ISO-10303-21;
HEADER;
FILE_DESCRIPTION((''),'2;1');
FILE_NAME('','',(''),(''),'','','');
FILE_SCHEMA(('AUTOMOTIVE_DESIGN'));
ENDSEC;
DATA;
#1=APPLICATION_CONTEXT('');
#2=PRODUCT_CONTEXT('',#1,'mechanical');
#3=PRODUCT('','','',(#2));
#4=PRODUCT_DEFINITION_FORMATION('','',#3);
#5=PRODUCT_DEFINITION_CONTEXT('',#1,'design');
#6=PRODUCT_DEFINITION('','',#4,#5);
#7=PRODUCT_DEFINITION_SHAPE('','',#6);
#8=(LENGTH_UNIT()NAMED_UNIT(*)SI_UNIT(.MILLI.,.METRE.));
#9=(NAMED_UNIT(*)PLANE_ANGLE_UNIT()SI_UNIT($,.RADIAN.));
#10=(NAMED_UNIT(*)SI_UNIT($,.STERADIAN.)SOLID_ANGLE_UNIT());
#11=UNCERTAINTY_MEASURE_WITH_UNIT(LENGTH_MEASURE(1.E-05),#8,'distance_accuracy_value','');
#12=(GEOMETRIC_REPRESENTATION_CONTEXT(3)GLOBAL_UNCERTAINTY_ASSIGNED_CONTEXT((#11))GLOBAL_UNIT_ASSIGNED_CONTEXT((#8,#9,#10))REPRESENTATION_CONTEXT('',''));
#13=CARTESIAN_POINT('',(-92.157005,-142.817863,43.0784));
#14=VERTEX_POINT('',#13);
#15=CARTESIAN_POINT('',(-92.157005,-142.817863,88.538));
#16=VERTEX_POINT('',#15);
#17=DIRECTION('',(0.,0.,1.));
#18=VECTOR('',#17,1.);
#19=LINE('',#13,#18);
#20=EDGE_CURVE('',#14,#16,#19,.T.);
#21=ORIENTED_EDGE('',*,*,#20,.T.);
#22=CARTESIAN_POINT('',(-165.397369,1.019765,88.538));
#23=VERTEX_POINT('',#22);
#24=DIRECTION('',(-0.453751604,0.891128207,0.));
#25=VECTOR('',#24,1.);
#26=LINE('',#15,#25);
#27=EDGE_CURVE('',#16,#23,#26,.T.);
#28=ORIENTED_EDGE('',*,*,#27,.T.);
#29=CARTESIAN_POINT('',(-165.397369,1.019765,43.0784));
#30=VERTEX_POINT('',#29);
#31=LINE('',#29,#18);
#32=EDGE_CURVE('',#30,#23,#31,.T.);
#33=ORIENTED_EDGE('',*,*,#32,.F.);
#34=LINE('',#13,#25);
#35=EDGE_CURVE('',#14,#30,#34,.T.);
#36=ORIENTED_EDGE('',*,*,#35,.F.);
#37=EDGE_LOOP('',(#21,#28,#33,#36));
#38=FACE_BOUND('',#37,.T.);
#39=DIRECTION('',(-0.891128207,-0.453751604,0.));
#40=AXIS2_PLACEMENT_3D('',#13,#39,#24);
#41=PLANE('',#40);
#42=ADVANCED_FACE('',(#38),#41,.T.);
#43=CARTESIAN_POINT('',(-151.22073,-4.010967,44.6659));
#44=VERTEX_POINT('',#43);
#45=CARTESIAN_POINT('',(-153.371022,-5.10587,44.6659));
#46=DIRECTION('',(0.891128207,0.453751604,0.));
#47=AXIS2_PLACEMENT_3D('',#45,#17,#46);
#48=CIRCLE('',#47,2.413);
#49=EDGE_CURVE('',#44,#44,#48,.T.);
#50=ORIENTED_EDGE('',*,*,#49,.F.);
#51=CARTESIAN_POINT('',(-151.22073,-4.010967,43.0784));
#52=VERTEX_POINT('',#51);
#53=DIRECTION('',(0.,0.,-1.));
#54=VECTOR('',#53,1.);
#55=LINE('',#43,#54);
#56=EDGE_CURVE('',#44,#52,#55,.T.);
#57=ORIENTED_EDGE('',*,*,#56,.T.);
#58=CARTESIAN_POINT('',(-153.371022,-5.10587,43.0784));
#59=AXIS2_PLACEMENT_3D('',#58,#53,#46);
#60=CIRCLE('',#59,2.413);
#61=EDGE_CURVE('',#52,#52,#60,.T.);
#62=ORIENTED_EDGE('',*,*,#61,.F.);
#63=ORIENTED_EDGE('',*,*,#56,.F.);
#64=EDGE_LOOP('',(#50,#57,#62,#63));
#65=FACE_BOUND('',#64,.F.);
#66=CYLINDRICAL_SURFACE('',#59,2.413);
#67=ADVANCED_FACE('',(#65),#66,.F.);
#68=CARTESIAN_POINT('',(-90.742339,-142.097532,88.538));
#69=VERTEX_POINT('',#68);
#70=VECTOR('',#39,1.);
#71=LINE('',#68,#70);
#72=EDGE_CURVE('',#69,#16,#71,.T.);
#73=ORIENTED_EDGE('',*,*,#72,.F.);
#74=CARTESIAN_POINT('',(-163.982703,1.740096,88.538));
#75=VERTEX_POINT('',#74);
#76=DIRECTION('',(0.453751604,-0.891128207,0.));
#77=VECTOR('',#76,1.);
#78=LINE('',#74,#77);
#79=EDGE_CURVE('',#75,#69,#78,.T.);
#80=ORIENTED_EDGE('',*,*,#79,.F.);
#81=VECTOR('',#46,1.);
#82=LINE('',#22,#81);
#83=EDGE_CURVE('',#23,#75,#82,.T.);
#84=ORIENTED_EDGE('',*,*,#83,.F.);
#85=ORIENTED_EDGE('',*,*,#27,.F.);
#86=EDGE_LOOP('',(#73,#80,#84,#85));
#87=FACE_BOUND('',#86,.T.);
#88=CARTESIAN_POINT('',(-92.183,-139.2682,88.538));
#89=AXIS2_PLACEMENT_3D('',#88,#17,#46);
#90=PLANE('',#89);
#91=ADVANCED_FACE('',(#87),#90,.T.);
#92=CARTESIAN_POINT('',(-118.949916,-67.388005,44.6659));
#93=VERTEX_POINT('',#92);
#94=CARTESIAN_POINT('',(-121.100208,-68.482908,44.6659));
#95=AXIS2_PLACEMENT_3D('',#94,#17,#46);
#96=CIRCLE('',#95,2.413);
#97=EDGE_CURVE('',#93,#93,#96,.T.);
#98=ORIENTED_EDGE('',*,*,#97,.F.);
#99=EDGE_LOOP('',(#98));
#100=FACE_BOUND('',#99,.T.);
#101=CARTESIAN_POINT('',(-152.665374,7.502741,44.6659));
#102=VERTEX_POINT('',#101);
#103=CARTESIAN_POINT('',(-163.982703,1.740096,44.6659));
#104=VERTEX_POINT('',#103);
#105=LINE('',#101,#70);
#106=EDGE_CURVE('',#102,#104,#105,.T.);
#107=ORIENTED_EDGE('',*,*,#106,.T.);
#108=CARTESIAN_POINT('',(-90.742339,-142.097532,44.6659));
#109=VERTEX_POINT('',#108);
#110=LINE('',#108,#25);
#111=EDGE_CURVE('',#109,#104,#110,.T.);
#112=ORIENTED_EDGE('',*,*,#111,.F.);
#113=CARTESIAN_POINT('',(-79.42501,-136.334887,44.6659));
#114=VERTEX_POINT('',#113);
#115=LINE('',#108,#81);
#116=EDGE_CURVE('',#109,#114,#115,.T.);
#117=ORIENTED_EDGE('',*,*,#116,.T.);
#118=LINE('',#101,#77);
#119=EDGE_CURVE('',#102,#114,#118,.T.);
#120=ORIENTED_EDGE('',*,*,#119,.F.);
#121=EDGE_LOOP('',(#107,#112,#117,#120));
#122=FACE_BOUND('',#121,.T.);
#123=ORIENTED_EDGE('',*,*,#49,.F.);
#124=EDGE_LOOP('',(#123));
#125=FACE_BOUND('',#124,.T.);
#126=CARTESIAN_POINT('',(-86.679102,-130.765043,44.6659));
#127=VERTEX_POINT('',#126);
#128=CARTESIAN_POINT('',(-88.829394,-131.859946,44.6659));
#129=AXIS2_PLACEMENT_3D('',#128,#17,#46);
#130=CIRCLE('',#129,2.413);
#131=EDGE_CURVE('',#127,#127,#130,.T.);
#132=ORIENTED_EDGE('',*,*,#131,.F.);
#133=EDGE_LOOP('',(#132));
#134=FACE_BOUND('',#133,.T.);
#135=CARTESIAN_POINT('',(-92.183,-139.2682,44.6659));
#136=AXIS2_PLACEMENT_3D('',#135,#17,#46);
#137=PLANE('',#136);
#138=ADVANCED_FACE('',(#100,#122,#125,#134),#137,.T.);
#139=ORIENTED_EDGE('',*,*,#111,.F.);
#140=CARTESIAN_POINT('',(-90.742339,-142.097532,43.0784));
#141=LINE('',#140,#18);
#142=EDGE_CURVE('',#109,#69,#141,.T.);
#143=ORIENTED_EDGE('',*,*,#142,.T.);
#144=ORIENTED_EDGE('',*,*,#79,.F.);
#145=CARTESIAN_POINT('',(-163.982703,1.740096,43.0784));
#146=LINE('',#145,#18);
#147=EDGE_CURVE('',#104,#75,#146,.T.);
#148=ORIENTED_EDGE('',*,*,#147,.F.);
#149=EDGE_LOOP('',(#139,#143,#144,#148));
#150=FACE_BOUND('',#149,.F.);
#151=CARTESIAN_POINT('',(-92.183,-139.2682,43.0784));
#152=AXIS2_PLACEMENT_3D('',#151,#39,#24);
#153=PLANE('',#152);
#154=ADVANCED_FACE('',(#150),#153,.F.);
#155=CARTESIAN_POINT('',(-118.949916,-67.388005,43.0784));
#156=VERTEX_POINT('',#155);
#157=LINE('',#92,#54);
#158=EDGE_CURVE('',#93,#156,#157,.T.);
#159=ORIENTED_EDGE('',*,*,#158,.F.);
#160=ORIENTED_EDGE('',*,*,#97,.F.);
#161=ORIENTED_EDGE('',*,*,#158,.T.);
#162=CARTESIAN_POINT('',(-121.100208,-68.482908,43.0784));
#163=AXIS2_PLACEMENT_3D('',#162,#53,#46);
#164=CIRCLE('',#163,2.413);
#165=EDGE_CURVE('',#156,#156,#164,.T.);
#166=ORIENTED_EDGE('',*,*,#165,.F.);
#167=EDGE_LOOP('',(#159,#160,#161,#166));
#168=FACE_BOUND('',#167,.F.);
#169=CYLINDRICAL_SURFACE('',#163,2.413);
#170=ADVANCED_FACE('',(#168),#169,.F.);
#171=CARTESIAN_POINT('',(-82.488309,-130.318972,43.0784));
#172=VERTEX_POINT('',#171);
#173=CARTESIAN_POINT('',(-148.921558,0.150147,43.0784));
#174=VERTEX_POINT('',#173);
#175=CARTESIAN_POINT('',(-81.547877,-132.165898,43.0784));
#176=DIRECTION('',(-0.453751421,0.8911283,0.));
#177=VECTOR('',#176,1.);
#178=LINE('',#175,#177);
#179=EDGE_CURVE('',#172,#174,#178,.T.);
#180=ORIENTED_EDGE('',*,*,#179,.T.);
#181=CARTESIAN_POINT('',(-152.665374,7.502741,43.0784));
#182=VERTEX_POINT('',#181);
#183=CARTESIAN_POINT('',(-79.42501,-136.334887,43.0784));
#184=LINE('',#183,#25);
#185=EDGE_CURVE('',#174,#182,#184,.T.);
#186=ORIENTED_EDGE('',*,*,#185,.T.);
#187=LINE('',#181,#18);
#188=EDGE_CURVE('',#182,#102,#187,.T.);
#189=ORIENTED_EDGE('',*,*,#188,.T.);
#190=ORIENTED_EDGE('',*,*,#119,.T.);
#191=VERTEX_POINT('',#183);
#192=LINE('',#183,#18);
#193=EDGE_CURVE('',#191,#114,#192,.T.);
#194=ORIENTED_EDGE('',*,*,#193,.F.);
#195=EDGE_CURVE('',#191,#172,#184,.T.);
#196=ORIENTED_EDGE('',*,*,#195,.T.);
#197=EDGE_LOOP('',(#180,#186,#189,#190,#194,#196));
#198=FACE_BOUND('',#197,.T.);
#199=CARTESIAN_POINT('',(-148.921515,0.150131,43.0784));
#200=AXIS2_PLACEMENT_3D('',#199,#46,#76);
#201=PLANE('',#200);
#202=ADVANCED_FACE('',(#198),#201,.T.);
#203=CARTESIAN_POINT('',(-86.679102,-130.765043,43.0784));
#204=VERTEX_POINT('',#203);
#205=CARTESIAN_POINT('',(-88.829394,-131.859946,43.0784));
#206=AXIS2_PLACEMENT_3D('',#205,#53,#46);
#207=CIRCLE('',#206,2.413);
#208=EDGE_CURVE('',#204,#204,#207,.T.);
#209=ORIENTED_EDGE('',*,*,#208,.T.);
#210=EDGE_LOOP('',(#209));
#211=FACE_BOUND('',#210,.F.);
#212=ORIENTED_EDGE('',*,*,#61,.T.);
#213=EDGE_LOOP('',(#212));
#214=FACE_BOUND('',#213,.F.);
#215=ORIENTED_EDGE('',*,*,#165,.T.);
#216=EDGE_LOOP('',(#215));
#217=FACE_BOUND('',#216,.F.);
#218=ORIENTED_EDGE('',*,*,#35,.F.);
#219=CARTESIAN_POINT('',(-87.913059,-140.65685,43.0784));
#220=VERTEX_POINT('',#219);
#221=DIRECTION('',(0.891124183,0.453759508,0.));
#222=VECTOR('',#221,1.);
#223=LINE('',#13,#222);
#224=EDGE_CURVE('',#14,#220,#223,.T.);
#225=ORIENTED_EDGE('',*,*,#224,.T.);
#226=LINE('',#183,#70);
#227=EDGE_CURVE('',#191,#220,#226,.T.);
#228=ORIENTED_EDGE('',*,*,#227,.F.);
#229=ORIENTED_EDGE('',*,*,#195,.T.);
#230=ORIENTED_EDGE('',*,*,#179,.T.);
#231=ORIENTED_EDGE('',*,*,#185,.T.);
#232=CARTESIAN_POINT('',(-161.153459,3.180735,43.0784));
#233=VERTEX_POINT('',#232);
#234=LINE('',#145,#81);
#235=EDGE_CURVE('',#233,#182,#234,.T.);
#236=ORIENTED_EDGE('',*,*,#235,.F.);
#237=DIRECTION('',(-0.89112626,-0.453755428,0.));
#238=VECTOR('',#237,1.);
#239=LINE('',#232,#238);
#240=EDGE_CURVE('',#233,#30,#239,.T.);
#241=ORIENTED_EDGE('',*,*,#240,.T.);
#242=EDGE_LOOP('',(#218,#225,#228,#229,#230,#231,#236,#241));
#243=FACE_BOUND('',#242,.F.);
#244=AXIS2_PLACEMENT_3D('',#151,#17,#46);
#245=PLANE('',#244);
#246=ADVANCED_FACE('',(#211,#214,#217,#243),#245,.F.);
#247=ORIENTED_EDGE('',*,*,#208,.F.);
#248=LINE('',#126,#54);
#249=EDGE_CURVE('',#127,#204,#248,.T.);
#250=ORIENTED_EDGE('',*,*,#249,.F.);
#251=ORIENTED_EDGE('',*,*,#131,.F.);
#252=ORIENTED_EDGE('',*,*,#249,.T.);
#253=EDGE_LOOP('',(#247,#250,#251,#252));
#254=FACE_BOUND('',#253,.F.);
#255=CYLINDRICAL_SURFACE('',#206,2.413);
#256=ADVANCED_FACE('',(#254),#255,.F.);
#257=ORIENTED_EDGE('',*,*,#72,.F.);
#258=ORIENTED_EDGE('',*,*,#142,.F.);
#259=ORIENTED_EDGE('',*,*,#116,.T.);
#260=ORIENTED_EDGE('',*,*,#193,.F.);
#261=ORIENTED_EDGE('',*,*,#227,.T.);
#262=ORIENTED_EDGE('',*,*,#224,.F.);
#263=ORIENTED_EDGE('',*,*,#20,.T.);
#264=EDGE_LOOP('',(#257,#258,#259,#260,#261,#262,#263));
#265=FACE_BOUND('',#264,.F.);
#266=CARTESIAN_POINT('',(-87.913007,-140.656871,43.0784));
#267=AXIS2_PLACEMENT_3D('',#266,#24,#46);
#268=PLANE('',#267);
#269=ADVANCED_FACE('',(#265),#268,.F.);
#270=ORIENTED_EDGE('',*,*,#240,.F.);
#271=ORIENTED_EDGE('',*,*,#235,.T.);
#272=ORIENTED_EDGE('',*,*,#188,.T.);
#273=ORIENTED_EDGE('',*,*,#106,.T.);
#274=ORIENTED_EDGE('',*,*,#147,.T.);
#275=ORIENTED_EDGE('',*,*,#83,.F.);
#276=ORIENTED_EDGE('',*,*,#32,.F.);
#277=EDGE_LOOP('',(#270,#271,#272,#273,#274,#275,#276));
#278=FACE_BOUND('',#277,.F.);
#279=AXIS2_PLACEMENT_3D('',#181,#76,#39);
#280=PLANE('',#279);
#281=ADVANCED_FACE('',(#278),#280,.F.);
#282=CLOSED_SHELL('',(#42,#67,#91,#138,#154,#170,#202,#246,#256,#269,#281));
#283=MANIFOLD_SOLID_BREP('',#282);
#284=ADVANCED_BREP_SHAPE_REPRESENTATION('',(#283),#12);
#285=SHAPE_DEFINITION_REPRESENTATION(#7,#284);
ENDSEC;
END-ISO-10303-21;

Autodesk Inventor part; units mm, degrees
ref_plane "Work Plane1" through (-105.5469, -33.8995, 0) normal (0, 0, 1) x (1, 0, 0)
sketch "Sketch1" plane through (-105.5469, -33.8995, 0) normal (0, 0, 1) x (1, 0, 0)
  circle A0 centre (51.4164, 20.6909) radius 2.413 projected
  circle A1 centre (61.5426, -29.0897) radius 2.413 projected
  circle A2 centre (41.2902, 70.4714) radius 2.413 projected
  circle A3 centre (71.6688, -78.8702) radius 2.413 projected
  circle A4 centre (27.8827, -36.0288) radius 3.175 projected
  line L0 (21.5564, -145.7309) -> (-91.4082, 76.2381) projected
  line L1 (59.5069, 74.2446) -> (98.755, -118.7966) projected
  line L2 (15.2228, 144.056) -> (44.9436, 105.9012) projected
  line L3 (63.6348, -131.723) -> (58.903, -119.9375) projected
  line L4 (53.0129, -122.3028) -> (57.7447, -134.0883) projected
  arc A5 (3.7348, 135.3868) -> (-79.7406, 82.2913) centre (-35.4587, 104.8391) ccw
  line L5 (3.7348, 135.3868) -> (33.4679, 97.2384)
  arc A6 (45.3974, 71.3204) -> (33.4679, 97.2384) centre (-15.7425, 58.8835) ccw
  line L6 (45.3974, 71.3204) -> (84.6647, -121.7179)
  arc A7 (33.2723, -139.6562) -> (84.6647, -121.7179) centre (57.7489, -127.193) ccw
  arc A8 (2.9524, 134.777) -> (-78.8566, 82.7414) centre (-35.4587, 104.8391) ccw
  line L7 (2.9524, 134.777) -> (32.6855, 96.6286)
  arc A9 (44.4253, 71.1227) -> (32.6855, 96.6286) centre (-15.7425, 58.8835) ccw
  line L8 (44.4253, 71.1227) -> (83.6926, -121.9156)
  arc A10 (34.1563, -139.2061) -> (83.6926, -121.9156) centre (57.7489, -127.193) ccw
  line L9 (34.1563, -139.2061) -> (-78.8566, 82.7414)
  arc A11 (-4.5602, 128.9216) -> (-70.3686, 87.0634) centre (-35.4587, 104.8391) ccw
  line L10 (-4.5602, 128.9216) -> (25.1729, 90.7732)
  arc A12 (35.0915, 69.224) -> (25.1729, 90.7732) centre (-15.7425, 58.8835) ccw
  line L11 (35.0915, 69.224) -> (74.3588, -123.8143)
  arc A13 (42.6443, -134.8841) -> (74.3588, -123.8143) centre (57.7489, -127.193) ccw
  line L12 (42.6443, -134.8841) -> (-70.3686, 87.0634)
  arc A14 (5.4566, 136.7288) -> (-81.686, 81.3007) centre (-35.4587, 104.8391) ccw
  line L13 (5.4566, 136.7288) -> (35.1897, 98.5804)
  arc A15 (47.5366, 71.7556) -> (35.1897, 98.5804) centre (-15.7425, 58.8835) ccw
  line L14 (47.5366, 71.7556) -> (86.8039, -121.2827)
  arc A16 (31.327, -140.6467) -> (86.8039, -121.2827) centre (57.7489, -127.193) ccw
  line L15 (31.327, -140.6467) -> (-81.686, 81.3007)
  circle A17 centre (57.7489, -127.193) radius 44.45
  circle A18 centre (-35.4587, 104.8391) radius 69.85
  circle A19 centre (-47.8242, 28.7936) radius 2.413 projected
  circle A20 centre (-15.5534, -34.5834) radius 2.413 projected
  circle A21 centre (16.7174, -97.9605) radius 2.413 projected
  line L16 (-33.1344, 24.0942) -> (34.7456, 18.5458) projected
  line L17 (36.5081, 12.9323) -> (-6.2049, -22.3208) projected
  line L18 (-20.7511, -20.2117) -> (-39.1333, 15.9083) projected
  line L19 (38.3036, 25.8999) -> (-20.4951, 30.706) projected
  line L20 (-21.5821, 36.7465) -> (30.7819, 61.2351) projected
  line L21 (44.0707, 55.5202) -> (48.097, 35.7165) projected
  line L22 (-53.0081, 43.1715) -> (-61.3301, 59.5239) projected
  line L23 (17.8998, 109.9146) -> (30.1007, 94.2514) projected
  line L24 (27.5547, 68.1378) -> (-5.8444, 52.5185) projected
  line L25 (27.1825, -114.3985) -> (25.3807, -110.8581) projected
  line L26 (32.1964, -96.6363) -> (38.137, -94.5724) projected
  line L27 (74.4344, -93.8236) -> (75.2107, -97.6416) projected
  line L28 (50.495, -96.7953) -> (49.4394, -94.1661) projected
  line L29 (51.3425, -89.9843) -> (60.23, -86.8964) projected
  line L30 (-10.1341, 54.212) -> (-12.6231, 60.4113) projected
  line L31 (-19.6913, 57.573) -> (-16.9128, 50.6526) projected
  line L32 (-18.5132, 46.5938) -> (-35.734, 38.5403) projected
  line L33 (42.124, -96.3889) -> (43.4268, -99.6336) projected
  arc A22 (40.3328, 7.2327) -> (41.7343, 8.6241) centre (33.4597, 15.5569) ccw projected
  arc A23 (45.6191, 9.409) -> (41.7343, 8.6241) centre (44.1679, 6.585) ccw projected
  arc A24 (45.6191, 9.409) -> (50.3997, 8.0475) centre (51.4164, 20.6909) ccw projected
  arc A25 (53.2564, 5.5162) -> (50.3997, 8.0475) centre (50.1452, 4.8827) ccw projected
  line L34 (53.2564, 5.5162) -> (57.2026, -13.8642) projected
  arc A26 (55.534, -17.3261) -> (57.2026, -13.8642) centre (54.0915, -14.4977) ccw projected
  arc A27 (55.534, -17.3261) -> (49.5198, -23.895) centre (61.311, -28.6529) ccw projected
  arc A28 (46.8024, -25.8738) -> (49.5198, -23.895) centre (46.5755, -22.7069) ccw projected
  line L35 (46.8024, -25.8738) -> (37.6772, -26.5277) projected
  arc A29 (35.5367, -25.8944) -> (37.6772, -26.5277) centre (37.4502, -23.3608) ccw projected
  arc A30 (35.5367, -25.8944) -> (18.8618, -27.0893) centre (27.8827, -36.0288) ccw projected
  arc A31 (16.8336, -28.0213) -> (18.8618, -27.0893) centre (16.6066, -24.8545) ccw projected
  line L36 (16.8336, -28.0213) -> (0.7655, -29.1728) projected
  arc A32 (-0.3587, -26.3652) -> (0.7655, -29.1728) centre (0.652, -27.5893) ccw projected
  line L37 (-0.3587, -26.3652) -> (40.3328, 7.2327) projected
  arc A33 (12.0706, -61.7398) -> (8.1483, -51.9706) centre (20.8352, -52.5488) ccw projected
  line L38 (25.9855, -70.6908) -> (17.4507, -83.8024) projected
  line L39 (11.5059, -83.5949) -> (-6.8763, -47.4749) projected
  line L40 (-0.2859, -37.1185) -> (-0.1921, -37.1119) projected
  line L41 (74.8789, -123.628) -> (78.6564, -122.8604) projected
  line L42 (0.38, 132.4063) -> (2.0588, 130.251) projected
  line L43 (38.7029, -137.0353) -> (37.8849, -135.428) projected
  line L44 (38.579, -133.2932) -> (44.3373, -130.3617) projected
  line L45 (12.0706, -61.7398) -> (13.7631, -65.9552) projected
  line L46 (17.8911, -67.7189) -> (22.1428, -66.0115) projected
  line L47 (2.9792, -39.0961) -> (8.1483, -51.9706) projected
  ellipse E0 centre (-34.8429, 105.035) end of major axis (-54.1736, 165.5211) minor radius 63.4728 (15.2228, 144.056) -> (-91.4082, 76.2381) ccw projected
  ellipse E1 centre (58.3238, -127.0129) end of major axis (45.7589, -87.6969) minor radius 41.2573 (21.5564, -145.7309) -> (98.755, -118.7966) ccw projected
  ellipse E2 centre (-15.1352, 59.076) end of major axis (-38.3321, 131.6593) minor radius 76.1674 (59.5069, 74.2446) -> (44.9436, 105.9012) ccw projected
  ellipse E3 centre (-34.8429, 105.035) end of major axis (-38.9507, 117.8883) minor radius 13.488 projected
  ellipse E4 centre (60.6898, -132.9057) end of major axis (59.7232, -129.8814) minor radius 3.1736 (57.7447, -134.0883) -> (63.6348, -131.723) ccw projected
  ellipse E5 centre (55.9579, -121.1202) end of major axis (54.9914, -118.0958) minor radius 3.1736 (58.903, -119.9375) -> (53.0129, -122.3028) ccw projected
  ellipse E6 centre (-47.0283, 29.0524) end of major axis (-50.8944, 41.1496) minor radius 12.6946 (-38.4497, 19.689) -> (-36.1193, 22.5544) ccw projected
  ellipse E7 centre (-33.3921, 20.9299) end of major axis (-34.3586, 23.9542) minor radius 3.1736 (-33.1344, 24.0942) -> (-36.1193, 22.5544) ccw projected
  ellipse E8 centre (34.4879, 15.3814) end of major axis (33.5214, 18.4057) minor radius 3.1736 (36.5081, 12.9323) -> (34.7456, 18.5458) ccw projected
  ellipse E9 centre (-8.2251, -19.8717) end of major axis (-7.2586, -22.896) minor radius 3.1736 (-9.5343, -22.7635) -> (-6.2049, -22.3208) ccw projected
  ellipse E10 centre (-14.7713, -34.3308) end of major axis (-18.6374, -22.2336) minor radius 12.6946 (-9.5343, -22.7635) -> (-17.2925, -21.8836) ccw projected
  ellipse E11 centre (-17.9228, -18.7718) end of major axis (-16.9563, -21.7962) minor radius 3.1736 (-20.7511, -20.2117) -> (-17.2925, -21.8836) ccw projected
  ellipse E12 centre (-36.305, 17.3481) end of major axis (-35.3385, 14.3238) minor radius 3.1736 (-38.4497, 19.689) -> (-39.1333, 15.9083) ccw projected
  ellipse E13 centre (38.5613, 29.0642) end of major axis (39.5278, 26.0399) minor radius 3.1736 (38.3036, 25.8999) -> (41.2885, 27.4397) ccw projected
  ellipse E14 centre (-20.2374, 33.8704) end of major axis (-19.2708, 30.8461) minor radius 3.1736 (-21.5821, 36.7465) -> (-20.4951, 30.706) ccw projected
  ellipse E15 centre (32.1266, 58.3589) end of major axis (31.1601, 61.3832) minor radius 3.1736 (34.1165, 60.8317) -> (30.7819, 61.2351) ccw projected
  ellipse E16 centre (42.0762, 70.723) end of major axis (38.2101, 82.8202) minor radius 12.6946 (34.1165, 60.8317) -> (41.1837, 58.0551) ccw projected
  ellipse E17 centre (40.9606, 54.8882) end of major axis (39.994, 57.9125) minor radius 3.1736 (44.0707, 55.5202) -> (41.1837, 58.0551) ccw projected
  ellipse E18 centre (44.9869, 35.0845) end of major axis (44.0204, 38.1088) minor radius 3.1736 (46.4291, 32.2559) -> (48.097, 35.7165) ccw projected
  ellipse E19 centre (-37.0786, 41.4165) end of major axis (-36.1121, 38.3922) minor radius 3.1736 (-39.0686, 38.9437) -> (-35.734, 38.5403) ccw projected
  ellipse E20 centre (-47.0283, 29.0524) end of major axis (-50.8944, 41.1496) minor radius 12.6946 (-39.0686, 38.9437) -> (-49.5495, 41.4996) ccw projected
  ellipse E21 centre (-50.1798, 44.6113) end of major axis (-49.2133, 41.587) minor radius 3.1736 (-53.0081, 43.1715) -> (-49.5495, 41.4996) ccw projected
  ellipse E22 centre (-58.5019, 60.9637) end of major axis (-57.5353, 57.9394) minor radius 3.1736 (-56.9933, 63.7566) -> (-61.3301, 59.5239) ccw projected
  ellipse E23 centre (-34.666, 105.0915) end of major axis (-48.9707, 149.8513) minor radius 46.9699 (-11.2596, 64.347) -> (12.228, 107.7818) ccw projected
  ellipse E24 centre (15.3966, 107.9636) end of major axis (14.43, 110.9879) minor radius 3.1736 (17.8998, 109.9146) -> (12.228, 107.7818) ccw projected
  ellipse E25 centre (-14.9584, 59.1325) end of major axis (2.4393, 4.6949) minor radius 57.1256 (35.8618, 85.223) -> (30.1007, 94.2514) ccw projected
  ellipse E26 centre (33.0385, 83.7735) end of major axis (32.0719, 86.7978) minor radius 3.1736 (34.846, 81.1634) -> (35.8618, 85.223) ccw projected
  ellipse E27 centre (42.0762, 70.723) end of major axis (38.2101, 82.8202) minor radius 12.6946 (34.846, 81.1634) -> (29.3832, 70.9558) ccw projected
  ellipse E28 centre (26.21, 71.014) end of major axis (25.2435, 74.0383) minor radius 3.1736 (27.5547, 68.1378) -> (29.3832, 70.9558) ccw projected
  ellipse E29 centre (58.5007, -126.9564) end of major axis (49.8019, -99.7376) minor radius 28.5628 (70.7406, -101.1419) -> (53.9461, -98.747) ccw projected
  ellipse E30 centre (30.0108, -112.9586) end of major axis (30.9773, -115.9829) minor radius 3.1736 (27.1825, -114.3985) -> (32.8598, -114.3584) ccw projected
  ellipse E31 centre (28.209, -109.4182) end of major axis (29.1755, -112.4425) minor radius 3.1736 (26.0643, -107.0774) -> (25.3807, -110.8581) ccw projected
  ellipse E32 centre (17.4857, -97.714) end of major axis (21.3519, -109.8112) minor radius 12.6946 (26.0643, -107.0774) -> (30.0878, -99.2512) ccw projected
  ellipse E33 centre (33.2384, -99.6355) end of major axis (34.2049, -102.6598) minor radius 3.1736 (32.1964, -96.6363) -> (30.0878, -99.2512) ccw projected
  ellipse E34 centre (61.272, -89.8956) end of major axis (60.3054, -86.8713) minor radius 3.1736 (63.5056, -87.6406) -> (60.23, -86.8964) ccw projected
  ellipse E35 centre (72.44, -78.6208) end of major axis (68.5739, -66.5236) minor radius 12.6946 (63.5056, -87.6406) -> (71.5475, -91.2887) ccw projected
  ellipse E36 centre (71.3244, -94.4556) end of major axis (70.3578, -91.4313) minor radius 3.1736 (74.4344, -93.8236) -> (71.5475, -91.2887) ccw projected
  ellipse E37 centre (72.1006, -98.2736) end of major axis (73.0671, -101.2979) minor radius 3.1736 (70.7406, -101.1419) -> (75.2107, -97.6416) ccw projected
  ellipse E38 centre (58.5007, -126.9564) end of major axis (49.8019, -99.7376) minor radius 28.5628 (42.2836, -103.4303) -> (32.8598, -114.3584) ccw projected
  ellipse E39 centre (-34.666, 105.0915) end of major axis (-48.9707, 149.8513) minor radius 46.9699 (-56.9933, 63.7566) -> (-23.3977, 59.4727) ccw projected
  ellipse E40 centre (53.44, -95.6126) end of major axis (54.4066, -98.6369) minor radius 3.1736 (50.495, -96.7953) -> (53.9461, -98.747) ccw projected
  ellipse E41 centre (52.3844, -92.9835) end of major axis (53.351, -96.0078) minor radius 3.1736 (51.3425, -89.9843) -> (49.4394, -94.1661) ccw projected
  ellipse E42 centre (-7.1891, 55.3946) end of major axis (-6.2225, 52.3703) minor radius 3.1736 (-10.1341, 54.212) -> (-5.8444, 52.5185) ccw projected
  ellipse E43 centre (-9.6781, 61.594) end of major axis (-8.7115, 58.5697) minor radius 3.1736 (-11.2596, 64.347) -> (-12.6231, 60.4113) ccw projected
  ellipse E44 centre (-19.8578, 49.4699) end of major axis (-20.8244, 52.4943) minor radius 3.1736 (-18.5132, 46.5938) -> (-16.9128, 50.6526) ccw projected
  ellipse E45 centre (-22.6364, 56.3903) end of major axis (-23.6029, 59.4146) minor radius 3.1736 (-19.6913, 57.573) -> (-23.3977, 59.4727) ccw projected
  ellipse E46 centre (39.179, -97.5715) end of major axis (38.2124, -94.5472) minor radius 3.1736 (42.124, -96.3889) -> (38.137, -94.5724) ccw projected
  ellipse E47 centre (40.4817, -100.8163) end of major axis (39.5152, -97.792) minor radius 3.1736 (42.2836, -103.4303) -> (43.4268, -99.6336) ccw projected
  ellipse E48 centre (14.791, -82.0695) end of major axis (15.7575, -85.0938) minor radius 3.1736 (15.3299, -85.1984) -> (17.4507, -83.8024) ccw projected
  ellipse E49 centre (17.4857, -97.714) end of major axis (13.6196, -85.6168) minor radius 12.6946 (15.3299, -85.1984) -> (14.9645, -85.2668) ccw projected
  ellipse E50 centre (14.3342, -82.155) end of major axis (15.3007, -85.1793) minor radius 3.1736 (11.5059, -83.5949) -> (14.9645, -85.2668) ccw projected
  ellipse E51 centre (-4.048, -46.035) end of major axis (-3.0815, -49.0593) minor radius 3.1736 (-6.1927, -43.6942) -> (-6.8763, -47.4749) ccw projected
  ellipse E52 centre (-14.7713, -34.3308) end of major axis (-10.9051, -46.428) minor radius 12.6946 (-6.1927, -43.6942) -> (-3.002, -39.0945) ccw projected
  ellipse E53 centre (-0.0597, -40.2854) end of major axis (-1.0262, -37.2611) minor radius 3.1736 (-0.2859, -37.1185) -> (-3.002, -39.0945) ccw projected
  ellipse E54 centre (-75.9068, 106.3278) end of major axis (-76.8733, 109.3521) minor radius 3.1736 (-73.3969, 108.2703) -> (-79.0792, 106.4229) ccw projected
  ellipse E55 centre (-58.3372, 119.9252) end of major axis (-64.1365, 138.071) minor radius 19.0419 (-73.3969, 108.2703) -> (-70.1692, 105.0022) ccw projected
  ellipse E56 centre (-72.1411, 102.5151) end of major axis (-73.1077, 105.5394) minor radius 3.1736 (-69.8464, 100.3213) -> (-70.1692, 105.0022) ccw projected
  ellipse E57 centre (-56.078, 87.1583) end of major axis (-61.8772, 105.3042) minor radius 19.0419 (-69.8464, 100.3213) -> (-72.5951, 96.6423) ccw projected
  ellipse E58 centre (-75.348, 98.223) end of major axis (-74.3814, 95.1987) minor radius 3.1736 (-78.4773, 97.6947) -> (-72.5951, 96.6423) ccw projected
  ellipse E59 centre (-34.666, 105.0915) end of major axis (-21.1345, 62.7512) minor radius 44.431 (-79.0792, 106.4229) -> (-78.4773, 97.6947) ccw projected
  ellipse E60 centre (-46.2445, 144.7092) end of major axis (-47.211, 147.7336) minor radius 3.1736 (-43.6215, 142.9211) -> (-47.1351, 147.7568) ccw projected
  ellipse E61 centre (-27.8837, 132.1924) end of major axis (-33.6829, 150.3383) minor radius 19.0419 (-43.6215, 142.9211) -> (-45.7303, 138.8412) ccw projected
  ellipse E62 centre (-48.7048, 139.9494) end of major axis (-47.7382, 136.925) minor radius 3.1736 (-50.0809, 137.0888) -> (-45.7303, 138.8412) ccw projected
  ellipse E63 centre (-58.3372, 119.9252) end of major axis (-64.1365, 138.071) minor radius 19.0419 (-50.0809, 137.0888) -> (-54.4286, 138.5679) ccw projected
  ellipse E64 centre (-53.7771, 141.675) end of major axis (-52.8106, 138.6507) minor radius 3.1736 (-55.2472, 144.4891) -> (-54.4286, 138.5679) ccw projected
  ellipse E65 centre (-34.666, 105.0915) end of major axis (-21.1345, 62.7512) minor radius 44.431 (-47.1351, 147.7568) -> (-55.2472, 144.4891) ccw projected
  ellipse E66 centre (78.9727, -124.4161) end of major axis (78.4894, -122.9039) minor radius 1.5868 (80.5474, -124.2206) -> (78.6564, -122.8604) ccw projected
  ellipse E67 centre (58.5007, -126.9564) end of major axis (51.735, -105.7862) minor radius 22.2155 (79.7691, -133.3844) -> (80.5474, -124.2206) ccw projected
  ellipse E68 centre (76.7308, -132.4661) end of major axis (77.6973, -135.4904) minor radius 3.1736 (73.5579, -132.5427) -> (79.7691, -133.3844) ccw projected
  ellipse E69 centre (60.8666, -132.8492) end of major axis (64.7328, -144.9464) minor radius 12.6946 (73.5579, -132.5427) -> (72.5825, -127.9613) ccw projected
  ellipse E70 centre (75.5115, -126.7394) end of major axis (74.545, -123.7151) minor radius 3.1736 (74.8789, -123.628) -> (72.5825, -127.9613) ccw projected
  ellipse E71 centre (-0.4445, 128.2999) end of major axis (0.522, 125.2756) minor radius 3.1736 (-1.3529, 125.2581) -> (2.0588, 130.251) ccw projected
  ellipse E72 centre (-6.8031, 107.0071) end of major axis (-12.6023, 125.153) minor radius 19.0419 (-1.3529, 125.2581) -> (-6.001, 126.0393) ccw projected
  ellipse E73 centre (-5.8673, 129.2113) end of major axis (-4.9008, 126.187) minor radius 3.1736 (-9.0125, 129.6372) -> (-6.001, 126.0393) ccw projected
  ellipse E74 centre (-27.8837, 132.1924) end of major axis (-33.6829, 150.3383) minor radius 19.0419 (-9.0125, 129.6372) -> (-8.9508, 134.2302) ccw projected
  ellipse E75 centre (-5.7954, 134.5699) end of major axis (-6.7619, 137.5942) minor radius 3.1736 (-3.5745, 136.8374) -> (-8.9508, 134.2302) ccw projected
  ellipse E76 centre (-34.666, 105.0915) end of major axis (-21.1345, 62.7512) minor radius 44.431 (0.38, 132.4063) -> (-3.5745, 136.8374) ccw projected
  ellipse E77 centre (39.299, -134.708) end of major axis (39.7823, -136.2202) minor radius 1.5868 (38.579, -133.2932) -> (37.8849, -135.428) ccw projected
  ellipse E78 centre (45.0573, -131.7765) end of major axis (44.5741, -130.2644) minor radius 1.5868 (46.551, -131.2409) -> (44.3373, -130.3617) ccw projected
  ellipse E79 centre (58.5007, -126.9564) end of major axis (54.6346, -114.8592) minor radius 12.6946 (46.551, -131.2409) -> (48.2775, -134.4832) ccw projected
  ellipse E80 centre (60.8666, -132.8492) end of major axis (64.7328, -144.9464) minor radius 12.6946 (48.2775, -134.4832) -> (51.4877, -141.4055) ccw projected
  ellipse E81 centre (49.1429, -143.5446) end of major axis (48.1764, -140.5202) minor radius 3.1736 (47.5833, -146.3092) -> (51.4877, -141.4055) ccw projected
  ellipse E82 centre (58.5007, -126.9564) end of major axis (51.735, -105.7862) minor radius 22.2155 (38.7029, -137.0353) -> (47.5833, -146.3092) ccw projected
  ellipse E83 centre (52.1975, 20.9417) end of major axis (48.3314, 33.0389) minor radius 12.6946 (46.4291, 32.2559) -> (41.2885, 27.4397) ccw projected
  ellipse E84 centre (16.7081, -64.7725) end of major axis (17.6747, -67.7968) minor radius 3.1736 (13.7631, -65.9552) -> (17.8911, -67.7189) ccw projected
  ellipse E85 centre (23.3258, -68.9579) end of major axis (22.3593, -65.9336) minor radius 3.1736 (25.9855, -70.6908) -> (22.1428, -66.0115) ccw projected
  ellipse E86 centre (0.0342, -40.2787) end of major axis (-0.9324, -37.2544) minor radius 3.1736 (2.9792, -39.0961) -> (-0.1921, -37.1119) ccw projected
  ellipse E87 centre (45.8902, -59.8967) end of major axis (44.9237, -56.8724) minor radius 3.1736 (44.7072, -56.9504) -> (43.2305, -58.1638) ccw projected
  line L48 (44.7072, -56.9504) -> (46.8705, -56.0816) projected
  ellipse E88 centre (45.6876, -53.1353) end of major axis (44.721, -50.111) minor radius 3.1736 (46.8705, -56.0816) -> (48.6792, -52.0758) ccw projected
  ellipse E89 centre (51.6707, -51.0164) end of major axis (50.7042, -47.9921) minor radius 3.1736 (49.011, -49.2835) -> (48.6792, -52.0758) ccw projected
  line L49 (49.011, -49.2835) -> (53.8355, -41.872) projected
  line L50 (25.969, -84.6816) -> (43.2305, -58.1638) projected
  ellipse E90 centre (-17.6922, -49.6994) end of major axis (-15.8961, -55.3194) minor radius 5.8975 (-22.8057, -52.6378) -> (-14.6753, -44.6307) ccw projected
  ellipse E91 centre (-17.6417, -49.6706) end of major axis (-16.9644, -51.79) minor radius 2.224 projected
  ellipse E92 centre (56.4952, -43.6049) end of major axis (55.5287, -40.5806) minor radius 3.1736 (57.6599, -40.6518) -> (53.8355, -41.872) ccw projected
  ellipse E93 centre (62.3188, -28.8395) end of major axis (58.4526, -16.7423) minor radius 12.6946 (57.6599, -40.6518) -> (61.4262, -41.5074) ccw projected
  ellipse E94 centre (61.2031, -44.6744) end of major axis (60.2366, -41.6501) minor radius 3.1736 (64.3132, -44.0423) -> (61.4262, -41.5074) ccw projected
  line L51 (64.3132, -44.0423) -> (68.3396, -63.846) projected
  ellipse E95 centre (65.2295, -64.478) end of major axis (64.2629, -61.4537) minor radius 3.1736 (66.6716, -67.3066) -> (68.3396, -63.846) ccw projected
  ellipse E96 centre (72.44, -78.6208) end of major axis (68.5739, -66.5236) minor radius 12.6946 (66.6716, -67.3066) -> (59.8379, -77.0836) ccw projected
  ellipse E97 centre (56.6874, -76.6993) end of major axis (55.7209, -73.675) minor radius 3.1736 (57.7293, -79.6984) -> (59.8379, -77.0836) ccw projected
  line L52 (57.7293, -79.6984) -> (29.6957, -89.4384) projected
  ellipse E98 centre (28.6538, -86.4392) end of major axis (29.6203, -89.4635) minor radius 3.1736 (26.4202, -88.6942) -> (29.6957, -89.4384) ccw projected
  ellipse E99 centre (17.4857, -97.714) end of major axis (21.3519, -109.8112) minor radius 12.6946 (26.4202, -88.6942) -> (26.4002, -88.6744) ccw projected
  ellipse E100 centre (28.6288, -86.4145) end of major axis (27.6622, -83.3902) minor radius 3.1736 (25.969, -84.6816) -> (26.4002, -88.6744) ccw projected
  point P0 (105.5469, 33.8995)
  point P1 (-44.128, 35.5292)
  point P2 (-60.4612, 39.6172)
  point P3 (16.3005, -111.136)
  point P4 (23.999, -98.2664)
  point P5 (-35.4703, 104.8623)
  point P6 (57.7373, -127.1698)
  dimension "d0" = 12.7
  dimension "d1" = 9.525
  dimension "d2" = 88.9
  dimension "d3" = 139.7
ref_plane "Work Plane2" through (-41.9854, -105.2288, 43.0784) normal (0, 0, 1) x (1, 0, 0)
extrude "Extrusion1" add sketch "Sketch1" along normal up to surface (43.0784 mm away) contours L15 E90 L9 A17 | A18 L9 E90 L15 | L9 E90 A18 L12 E6 E12 L18 E11 E10 E52 E51 L39 E50 E49 E48 A17 | L9 E90 | E48 E49 E50 L39 E51 E52 L12 | L12 E10 E11 L18 E12 E6 | A19 | A20 | A21
sketch "Sketch2" plane through (-166.0081, 5.7177, 0) normal (-0.8911282, -0.4537516, 0) x (0, 0, 1)
  spline S0 degree 3 number of poles 454
  line L0 (43.0784, -169.1712) -> (43.0784, 0)
  line L1 (0, 0) -> (43.0784, 0)
  line L2 (0, 0) -> (0, -169.1712)
  line L3 (0, -169.1712) -> (43.0784, -169.1712)
  line L4 (13.1572, -174.2662) -> (29.9212, -174.2662)
  line L5 (13.1572, -174.2662) -> (13.1572, -19.5178)
  line L6 (13.1572, -19.5178) -> (29.9212, -19.5178)
  line L7 (29.9212, -19.5178) -> (29.9212, -174.2662)
  line L8 (13.1572, -19.5178) -> (13.1572, 0)
  line L9 (29.9212, -19.5178) -> (29.9212, 0)
  point P0 (0, -80.4217)
  point P1 (13.1572, -169.1712)
  point P2 (29.9212, -169.1712)
extrude "Extrusion2" cut sketch "Sketch2" against normal blind 3.175 contours L3 L5 L6 L7 | L9 L6 L8 L1
fillet "Fillet1" radius 3.175 5 edges at (-89.2464, -145.0355, 6.5786) (-89.2464, -145.0355, 36.4998) (-81.5478, -132.1659, 21.5392) (-149.6749, 1.6297, 21.5392) (-166.0081, 5.7177, 6.5786)
sketch "Sketch3" plane through (-92.183, -139.2682, 43.0784) normal (0, 0, 1) x (0.8911282, 0.4537516, 0)
  line L0 (6.35, 5.08) -> (6.35, 156.499)
  arc A0 (5.2924, 157.4265) -> (11.3663, 152.5714) centre (51.875, 209.4754) ccw projected
  circle A1 centre (6.35, 5.08) radius 2.413
  arc A2 (0, 0) -> (4.94, -2.6392) centre (3.175, 0) ccw projected
  circle A3 centre (6.35, 76.2) radius 2.413
  circle A4 centre (6.35, 147.32) radius 2.413
  point P0 (145.3401, 82.2776)
  dimension "d9" = 4.826
  dimension "d10" = 5.08
  dimension "d13" = 71.12
ref_plane "Work Plane3" through (-228.5882, -244.5835, 0) normal (0, 0, 1) x (1, 0, 0)
extrude "Extrusion3" cut sketch "Sketch3" against normal up to surface (43.0784 mm away)
thread "Thread1" size "10-24 UNC" class "2B" standard "ANSI Unified Screw Threads" full length
thread "Thread2" size "10-24 UNC" class "2B" standard "ANSI Unified Screw Threads" full length
thread "Thread3" size "10-24 UNC" class "2B" standard "ANSI Unified Screw Threads" full length
sketch "Sketch4" plane through (-148.9216, 0.1502, 43.0784) normal (0.8911282, 0.4537516, 0) x (0, 0, -1)
  line L0 (0, 0) -> (43.0784, 0) projected
  line L1 (0, 0) -> (0, -146.409) projected
  line L2 (43.0784, -146.409) -> (0, -146.409) projected
  line L3 (43.0784, -146.409) -> (43.0784, 0) projected
  line L4 (0, 2.5865) -> (0, 0) projected
  line L5 (0, 0) -> (43.0784, 0) projected
  line L6 (43.0784, 0) -> (43.0784, 2.5865) projected
  line L7 (43.0784, 2.5865) -> (0, 2.5865) projected
  line L8 (13.1572, 5.0759) -> (0, 5.0759) projected
  line L9 (0, 5.0759) -> (0, 7.4417) projected
  line L10 (0, 7.4417) -> (43.0784, 7.4417) projected
  line L11 (43.0784, 7.4417) -> (43.0784, 5.0759) projected
  line L12 (43.0784, 5.0759) -> (29.9212, 5.0759) projected
  line L13 (29.9212, 5.0759) -> (29.9212, 8.2509) projected
  line L14 (29.9212, 8.2509) -> (13.1572, 8.2509) projected
  line L15 (13.1572, 8.2509) -> (13.1572, 5.0759) projected
  line L16 (13.1572, 5.0759) -> (0, 5.0759) projected
  line L17 (0, 7.4417) -> (43.0784, 7.4417) projected
  line L18 (0, 7.4417) -> (0, 2.5865) projected
  line L19 (43.0784, 2.5865) -> (0, 2.5865) projected
  line L20 (43.0784, 2.5865) -> (43.0784, 7.4417) projected
  line L21 (0, -152.624) -> (0, -149.9848) projected
  line L22 (0, -149.9848) -> (13.1572, -149.9848) projected
  line L23 (13.1572, -149.9848) -> (13.1572, -153.1598) projected
  line L24 (13.1572, -153.1598) -> (29.9212, -153.1598) projected
  line L25 (29.9212, -153.1598) -> (29.9212, -149.9848) projected
  line L26 (43.0784, -149.9848) -> (29.9212, -149.9848) projected
  line L27 (43.0784, -149.9848) -> (43.0784, -152.624) projected
  line L28 (43.0784, -152.624) -> (0, -152.624) projected
  line L29 (0, -149.2865) -> (43.0784, -149.2865) projected
  line L30 (0, -149.2865) -> (0, -152.624) projected
  line L31 (43.0784, -152.624) -> (0, -152.624) projected
  line L32 (43.0784, -152.624) -> (43.0784, -149.2865) projected
  line L33 (0, -146.409) -> (0, -149.2865) projected
  line L34 (0, -149.2865) -> (43.0784, -149.2865) projected
  line L35 (43.0784, -149.2865) -> (43.0784, -146.409) projected
  line L36 (43.0784, -146.409) -> (0, -146.409) projected
  line L37 (43.0784, -153.1598) -> (0, -153.1598) projected
  line L38 (0, -152.624) -> (0, -149.9848) projected
  line L39 (0, -149.9848) -> (13.1572, -149.9848) projected
  line L40 (13.1572, -149.9848) -> (13.1572, -153.1598) projected
  line L41 (13.1572, -153.1598) -> (29.9212, -153.1598) projected
  line L42 (29.9212, -153.1598) -> (29.9212, -149.9848) projected
  line L43 (43.0784, -149.9848) -> (29.9212, -149.9848) projected
  line L44 (43.0784, -149.9848) -> (43.0784, -152.624) projected
  line L45 (43.0784, -152.624) -> (0, -152.624) projected
  line L46 (0, -153.1598) -> (43.0784, -153.1598)
  line L47 (43.0784, -153.1598) -> (43.0784, 7.4417)
  line L48 (43.0784, 7.4417) -> (0, 7.4417)
  line L49 (0, 7.4417) -> (0, -153.1598)
  point P0 (43.0784, -67.7072)
sketch "Sketch5" plane through (-92.183, -139.2682, 43.0784) normal (0, 0, 1) x (0.8911282, 0.4537516, 0)
  line L0 (12.7, 149.9848) -> (12.7, 3.5759) projected
  line L1 (3.175, 158.2357) -> (3.175, -3.175) projected
  circle A0 centre (6.35, 147.32) radius 2.413 projected
  circle A1 centre (6.35, 5.08) radius 2.413 projected
  circle A2 centre (6.35, 76.2) radius 2.413 projected
  arc A3 (5.2924, 157.4265) -> (0, 155.0607) centre (3.175, 155.0607) ccw projected
  line L2 (0, 0) -> (0, 155.0607) projected
  arc A4 (0, 0) -> (4.94, -2.6392) centre (3.175, 0) ccw projected
  arc A5 (10.8667, 0.6983) -> (4.94, -2.6392) centre (29.65, -39.5881) ccw projected
  arc A6 (10.8667, 0.6983) -> (12.7, 3.5759) centre (9.525, 3.5759) ccw projected
  line L3 (12.7, 149.9848) -> (12.7, 3.5759) projected
  arc A7 (12.7, 149.9848) -> (11.3663, 152.5714) centre (9.525, 149.9848) ccw projected
  arc A8 (5.2924, 157.4265) -> (11.3663, 152.5714) centre (51.875, 209.4754) ccw projected
  line L4 (0, -3.175) -> (12.7, -3.175)
  line L5 (12.7, -3.175) -> (12.7, 158.2357)
  line L6 (12.7, 158.2357) -> (0, 158.2357)
  line L7 (0, 158.2357) -> (0, -3.175)
  arc A9 (0, 0) -> (4.94, -2.6392) centre (3.175, 0) ccw projected
  arc A10 (5.2924, 157.4265) -> (0, 155.0607) centre (3.175, 155.0607) ccw projected
  line L8 (0, -3.175) -> (-1.5875, -3.175)
  line L9 (-1.5875, -3.175) -> (-1.5875, 158.2357)
  line L10 (-1.5875, 158.2357) -> (0, 158.2357)
  line L11 (0, 158.2357) -> (0, -3.175)
  point P0 (145.3401, 82.2776)
  point P1 (0, 0)
  point P2 (0, 158.2357)
  dimension "d28" = 1.5875
extrude "Extrusion4" add sketch "Sketch5" along normal blind 1.5875 contours L0 A6 A5 A4 L1 A3 A8 A7 | A7 A8 A3 L6 L5 | L5 L4 A4 A5 A6 | L1 A4 L2 A3 | A3 L7 L6 | L4 L7 A4
extrude "Extrusion5" add sketch "Sketch5" along normal blind 45.4596 contours L2 L7 L8 L9 L10
extrude "Extrusion6" cut sketch "Sketch5" against normal blind 43.0784 contours L0 A6 A5 A4 L1 A3 A8 A7 | A7 A8 A3 L6 L5 | L5 L4 A4 A5 A6 | L1 A4 L2 A3 | A3 L7 L6 | L4 L7 A4 | A0 | A1 | A2
properties part number "flat chain guide" material "Polyethylene, High Density"
